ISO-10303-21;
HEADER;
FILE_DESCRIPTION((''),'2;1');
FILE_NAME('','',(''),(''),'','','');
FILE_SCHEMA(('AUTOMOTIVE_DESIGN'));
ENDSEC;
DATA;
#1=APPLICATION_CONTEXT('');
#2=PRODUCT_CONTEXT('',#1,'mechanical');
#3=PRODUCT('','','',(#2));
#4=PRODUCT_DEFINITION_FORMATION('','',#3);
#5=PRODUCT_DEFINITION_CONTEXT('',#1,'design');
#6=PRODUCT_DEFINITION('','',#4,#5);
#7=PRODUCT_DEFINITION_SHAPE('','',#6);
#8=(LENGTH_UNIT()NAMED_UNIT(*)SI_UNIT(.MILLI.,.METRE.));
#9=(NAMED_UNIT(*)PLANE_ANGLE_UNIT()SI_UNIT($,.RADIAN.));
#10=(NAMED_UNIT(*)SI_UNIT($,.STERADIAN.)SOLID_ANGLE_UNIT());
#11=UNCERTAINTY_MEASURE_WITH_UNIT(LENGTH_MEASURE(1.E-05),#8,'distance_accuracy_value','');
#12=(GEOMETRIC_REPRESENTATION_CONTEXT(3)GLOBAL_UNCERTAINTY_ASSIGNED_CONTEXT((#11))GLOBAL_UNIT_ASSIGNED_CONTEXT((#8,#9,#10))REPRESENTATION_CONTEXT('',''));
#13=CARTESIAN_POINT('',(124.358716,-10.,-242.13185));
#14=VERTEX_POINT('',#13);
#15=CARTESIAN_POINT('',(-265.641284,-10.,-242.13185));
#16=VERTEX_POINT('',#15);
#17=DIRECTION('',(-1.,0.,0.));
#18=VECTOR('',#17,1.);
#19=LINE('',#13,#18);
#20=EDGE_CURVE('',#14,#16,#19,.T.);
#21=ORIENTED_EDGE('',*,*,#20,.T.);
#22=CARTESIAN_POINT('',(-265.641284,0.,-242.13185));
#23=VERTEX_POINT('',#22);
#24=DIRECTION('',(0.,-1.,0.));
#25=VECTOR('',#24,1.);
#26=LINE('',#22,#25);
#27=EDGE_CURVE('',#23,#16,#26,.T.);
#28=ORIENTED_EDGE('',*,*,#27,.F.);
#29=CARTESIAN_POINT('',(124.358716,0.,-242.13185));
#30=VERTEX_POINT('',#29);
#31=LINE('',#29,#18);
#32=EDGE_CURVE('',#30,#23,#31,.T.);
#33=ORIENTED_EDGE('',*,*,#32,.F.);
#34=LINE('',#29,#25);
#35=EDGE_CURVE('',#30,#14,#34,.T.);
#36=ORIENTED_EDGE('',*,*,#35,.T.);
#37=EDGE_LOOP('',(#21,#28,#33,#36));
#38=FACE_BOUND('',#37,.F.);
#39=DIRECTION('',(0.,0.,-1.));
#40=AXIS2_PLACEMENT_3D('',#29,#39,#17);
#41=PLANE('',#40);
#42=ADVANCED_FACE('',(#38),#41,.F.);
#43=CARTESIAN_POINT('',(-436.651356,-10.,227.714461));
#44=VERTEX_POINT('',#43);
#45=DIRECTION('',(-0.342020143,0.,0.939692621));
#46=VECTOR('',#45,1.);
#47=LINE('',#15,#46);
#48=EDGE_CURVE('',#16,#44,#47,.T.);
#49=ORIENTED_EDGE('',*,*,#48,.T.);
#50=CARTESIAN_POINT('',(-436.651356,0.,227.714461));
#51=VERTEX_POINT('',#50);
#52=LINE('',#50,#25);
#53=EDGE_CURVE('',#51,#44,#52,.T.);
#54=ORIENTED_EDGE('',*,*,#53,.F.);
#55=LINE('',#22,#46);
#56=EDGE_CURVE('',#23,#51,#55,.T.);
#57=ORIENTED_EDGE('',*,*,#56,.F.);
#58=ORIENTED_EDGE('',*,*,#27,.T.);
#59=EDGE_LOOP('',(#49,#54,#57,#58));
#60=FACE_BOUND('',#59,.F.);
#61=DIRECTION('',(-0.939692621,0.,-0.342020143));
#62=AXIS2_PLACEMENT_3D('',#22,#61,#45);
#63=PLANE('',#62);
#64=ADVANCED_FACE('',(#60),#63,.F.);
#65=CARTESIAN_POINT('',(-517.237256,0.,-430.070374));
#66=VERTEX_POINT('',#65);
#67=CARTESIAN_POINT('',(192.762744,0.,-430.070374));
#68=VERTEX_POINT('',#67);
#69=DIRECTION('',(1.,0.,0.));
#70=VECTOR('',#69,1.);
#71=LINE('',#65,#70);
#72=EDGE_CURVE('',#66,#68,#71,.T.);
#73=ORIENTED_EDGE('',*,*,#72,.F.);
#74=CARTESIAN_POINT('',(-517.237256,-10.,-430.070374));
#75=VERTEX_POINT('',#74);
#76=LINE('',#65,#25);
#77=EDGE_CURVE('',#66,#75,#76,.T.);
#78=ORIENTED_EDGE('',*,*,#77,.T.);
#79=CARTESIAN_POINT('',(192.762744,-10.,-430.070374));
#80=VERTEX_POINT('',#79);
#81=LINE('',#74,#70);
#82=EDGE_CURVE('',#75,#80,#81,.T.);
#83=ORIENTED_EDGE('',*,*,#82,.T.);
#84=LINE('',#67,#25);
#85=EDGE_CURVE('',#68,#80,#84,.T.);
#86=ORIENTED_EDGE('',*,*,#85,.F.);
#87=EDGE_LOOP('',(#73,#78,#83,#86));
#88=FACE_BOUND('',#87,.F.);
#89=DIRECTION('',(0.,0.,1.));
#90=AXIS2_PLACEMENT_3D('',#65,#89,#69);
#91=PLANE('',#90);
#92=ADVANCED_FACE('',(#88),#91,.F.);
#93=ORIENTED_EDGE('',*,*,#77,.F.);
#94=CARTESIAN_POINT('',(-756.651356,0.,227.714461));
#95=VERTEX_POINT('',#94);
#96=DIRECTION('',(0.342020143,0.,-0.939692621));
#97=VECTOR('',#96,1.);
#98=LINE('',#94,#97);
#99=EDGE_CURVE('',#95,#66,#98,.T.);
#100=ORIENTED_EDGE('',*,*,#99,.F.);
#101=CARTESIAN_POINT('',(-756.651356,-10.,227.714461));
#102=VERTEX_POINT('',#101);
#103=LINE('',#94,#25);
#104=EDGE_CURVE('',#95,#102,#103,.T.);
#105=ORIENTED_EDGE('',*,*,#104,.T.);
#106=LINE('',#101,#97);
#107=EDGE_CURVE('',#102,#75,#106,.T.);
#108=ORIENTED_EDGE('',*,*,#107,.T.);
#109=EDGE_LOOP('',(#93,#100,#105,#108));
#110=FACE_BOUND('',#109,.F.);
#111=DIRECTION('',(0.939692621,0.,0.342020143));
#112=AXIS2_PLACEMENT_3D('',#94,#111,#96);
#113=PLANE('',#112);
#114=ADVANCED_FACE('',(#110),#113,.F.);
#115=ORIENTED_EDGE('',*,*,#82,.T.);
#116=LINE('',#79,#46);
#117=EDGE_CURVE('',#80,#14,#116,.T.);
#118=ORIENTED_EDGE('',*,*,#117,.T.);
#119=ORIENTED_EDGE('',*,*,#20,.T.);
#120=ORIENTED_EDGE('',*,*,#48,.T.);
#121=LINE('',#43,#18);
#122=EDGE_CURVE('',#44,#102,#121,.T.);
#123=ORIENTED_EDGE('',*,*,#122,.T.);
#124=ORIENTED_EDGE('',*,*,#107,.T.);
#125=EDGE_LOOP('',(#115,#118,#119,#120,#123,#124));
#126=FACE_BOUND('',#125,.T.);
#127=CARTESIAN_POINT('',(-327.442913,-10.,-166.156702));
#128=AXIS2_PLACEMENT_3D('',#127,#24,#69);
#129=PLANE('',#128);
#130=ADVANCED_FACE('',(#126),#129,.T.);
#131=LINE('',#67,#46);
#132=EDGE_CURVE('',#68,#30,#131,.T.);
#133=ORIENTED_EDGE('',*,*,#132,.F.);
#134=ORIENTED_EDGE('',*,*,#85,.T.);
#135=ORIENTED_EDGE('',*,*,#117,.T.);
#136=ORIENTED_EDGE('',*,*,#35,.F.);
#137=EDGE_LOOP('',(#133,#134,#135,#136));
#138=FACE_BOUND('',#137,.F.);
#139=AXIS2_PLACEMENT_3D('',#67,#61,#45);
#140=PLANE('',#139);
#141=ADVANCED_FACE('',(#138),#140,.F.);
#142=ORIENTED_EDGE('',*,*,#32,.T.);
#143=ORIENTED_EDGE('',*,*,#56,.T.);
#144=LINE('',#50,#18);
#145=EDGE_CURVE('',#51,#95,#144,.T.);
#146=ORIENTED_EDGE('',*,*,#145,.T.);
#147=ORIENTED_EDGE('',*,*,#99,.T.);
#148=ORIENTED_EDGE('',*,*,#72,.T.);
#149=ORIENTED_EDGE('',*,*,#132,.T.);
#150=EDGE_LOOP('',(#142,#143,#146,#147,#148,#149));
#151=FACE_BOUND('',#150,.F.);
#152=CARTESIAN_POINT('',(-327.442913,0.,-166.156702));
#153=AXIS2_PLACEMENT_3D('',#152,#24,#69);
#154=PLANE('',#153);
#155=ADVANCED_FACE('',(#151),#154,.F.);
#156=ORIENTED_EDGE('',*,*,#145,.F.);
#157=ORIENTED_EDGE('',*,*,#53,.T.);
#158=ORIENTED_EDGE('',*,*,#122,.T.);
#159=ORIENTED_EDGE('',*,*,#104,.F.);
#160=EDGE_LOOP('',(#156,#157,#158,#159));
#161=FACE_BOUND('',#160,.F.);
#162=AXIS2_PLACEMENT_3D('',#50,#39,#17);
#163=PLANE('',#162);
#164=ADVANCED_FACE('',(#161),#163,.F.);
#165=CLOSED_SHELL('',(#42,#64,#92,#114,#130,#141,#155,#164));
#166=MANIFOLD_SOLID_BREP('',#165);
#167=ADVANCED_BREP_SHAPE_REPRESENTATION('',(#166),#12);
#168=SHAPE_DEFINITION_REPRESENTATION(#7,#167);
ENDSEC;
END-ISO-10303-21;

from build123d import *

# Parameters (mm, degrees)
F1_DEPTH = 10


# Not quite as in the source:
# - a feature names something its author has since deleted; it is built from what else it names


with BuildPart() as f1:
    # F0 (on Front) → F1 (new body)
    with BuildSketch(Plane.XZ):
        Polygon((-756.6513559012, 227.7144607794), (-517.2372555732, -430.0703737707), (192.7627444268, -430.0703737707), (124.3587157616, -242.1318496135), (-265.6412842384, -242.1318496135), (-436.6513559012, 227.7144607794), align=None)
    extrude(amount=F1_DEPTH)


solid = f1.part
